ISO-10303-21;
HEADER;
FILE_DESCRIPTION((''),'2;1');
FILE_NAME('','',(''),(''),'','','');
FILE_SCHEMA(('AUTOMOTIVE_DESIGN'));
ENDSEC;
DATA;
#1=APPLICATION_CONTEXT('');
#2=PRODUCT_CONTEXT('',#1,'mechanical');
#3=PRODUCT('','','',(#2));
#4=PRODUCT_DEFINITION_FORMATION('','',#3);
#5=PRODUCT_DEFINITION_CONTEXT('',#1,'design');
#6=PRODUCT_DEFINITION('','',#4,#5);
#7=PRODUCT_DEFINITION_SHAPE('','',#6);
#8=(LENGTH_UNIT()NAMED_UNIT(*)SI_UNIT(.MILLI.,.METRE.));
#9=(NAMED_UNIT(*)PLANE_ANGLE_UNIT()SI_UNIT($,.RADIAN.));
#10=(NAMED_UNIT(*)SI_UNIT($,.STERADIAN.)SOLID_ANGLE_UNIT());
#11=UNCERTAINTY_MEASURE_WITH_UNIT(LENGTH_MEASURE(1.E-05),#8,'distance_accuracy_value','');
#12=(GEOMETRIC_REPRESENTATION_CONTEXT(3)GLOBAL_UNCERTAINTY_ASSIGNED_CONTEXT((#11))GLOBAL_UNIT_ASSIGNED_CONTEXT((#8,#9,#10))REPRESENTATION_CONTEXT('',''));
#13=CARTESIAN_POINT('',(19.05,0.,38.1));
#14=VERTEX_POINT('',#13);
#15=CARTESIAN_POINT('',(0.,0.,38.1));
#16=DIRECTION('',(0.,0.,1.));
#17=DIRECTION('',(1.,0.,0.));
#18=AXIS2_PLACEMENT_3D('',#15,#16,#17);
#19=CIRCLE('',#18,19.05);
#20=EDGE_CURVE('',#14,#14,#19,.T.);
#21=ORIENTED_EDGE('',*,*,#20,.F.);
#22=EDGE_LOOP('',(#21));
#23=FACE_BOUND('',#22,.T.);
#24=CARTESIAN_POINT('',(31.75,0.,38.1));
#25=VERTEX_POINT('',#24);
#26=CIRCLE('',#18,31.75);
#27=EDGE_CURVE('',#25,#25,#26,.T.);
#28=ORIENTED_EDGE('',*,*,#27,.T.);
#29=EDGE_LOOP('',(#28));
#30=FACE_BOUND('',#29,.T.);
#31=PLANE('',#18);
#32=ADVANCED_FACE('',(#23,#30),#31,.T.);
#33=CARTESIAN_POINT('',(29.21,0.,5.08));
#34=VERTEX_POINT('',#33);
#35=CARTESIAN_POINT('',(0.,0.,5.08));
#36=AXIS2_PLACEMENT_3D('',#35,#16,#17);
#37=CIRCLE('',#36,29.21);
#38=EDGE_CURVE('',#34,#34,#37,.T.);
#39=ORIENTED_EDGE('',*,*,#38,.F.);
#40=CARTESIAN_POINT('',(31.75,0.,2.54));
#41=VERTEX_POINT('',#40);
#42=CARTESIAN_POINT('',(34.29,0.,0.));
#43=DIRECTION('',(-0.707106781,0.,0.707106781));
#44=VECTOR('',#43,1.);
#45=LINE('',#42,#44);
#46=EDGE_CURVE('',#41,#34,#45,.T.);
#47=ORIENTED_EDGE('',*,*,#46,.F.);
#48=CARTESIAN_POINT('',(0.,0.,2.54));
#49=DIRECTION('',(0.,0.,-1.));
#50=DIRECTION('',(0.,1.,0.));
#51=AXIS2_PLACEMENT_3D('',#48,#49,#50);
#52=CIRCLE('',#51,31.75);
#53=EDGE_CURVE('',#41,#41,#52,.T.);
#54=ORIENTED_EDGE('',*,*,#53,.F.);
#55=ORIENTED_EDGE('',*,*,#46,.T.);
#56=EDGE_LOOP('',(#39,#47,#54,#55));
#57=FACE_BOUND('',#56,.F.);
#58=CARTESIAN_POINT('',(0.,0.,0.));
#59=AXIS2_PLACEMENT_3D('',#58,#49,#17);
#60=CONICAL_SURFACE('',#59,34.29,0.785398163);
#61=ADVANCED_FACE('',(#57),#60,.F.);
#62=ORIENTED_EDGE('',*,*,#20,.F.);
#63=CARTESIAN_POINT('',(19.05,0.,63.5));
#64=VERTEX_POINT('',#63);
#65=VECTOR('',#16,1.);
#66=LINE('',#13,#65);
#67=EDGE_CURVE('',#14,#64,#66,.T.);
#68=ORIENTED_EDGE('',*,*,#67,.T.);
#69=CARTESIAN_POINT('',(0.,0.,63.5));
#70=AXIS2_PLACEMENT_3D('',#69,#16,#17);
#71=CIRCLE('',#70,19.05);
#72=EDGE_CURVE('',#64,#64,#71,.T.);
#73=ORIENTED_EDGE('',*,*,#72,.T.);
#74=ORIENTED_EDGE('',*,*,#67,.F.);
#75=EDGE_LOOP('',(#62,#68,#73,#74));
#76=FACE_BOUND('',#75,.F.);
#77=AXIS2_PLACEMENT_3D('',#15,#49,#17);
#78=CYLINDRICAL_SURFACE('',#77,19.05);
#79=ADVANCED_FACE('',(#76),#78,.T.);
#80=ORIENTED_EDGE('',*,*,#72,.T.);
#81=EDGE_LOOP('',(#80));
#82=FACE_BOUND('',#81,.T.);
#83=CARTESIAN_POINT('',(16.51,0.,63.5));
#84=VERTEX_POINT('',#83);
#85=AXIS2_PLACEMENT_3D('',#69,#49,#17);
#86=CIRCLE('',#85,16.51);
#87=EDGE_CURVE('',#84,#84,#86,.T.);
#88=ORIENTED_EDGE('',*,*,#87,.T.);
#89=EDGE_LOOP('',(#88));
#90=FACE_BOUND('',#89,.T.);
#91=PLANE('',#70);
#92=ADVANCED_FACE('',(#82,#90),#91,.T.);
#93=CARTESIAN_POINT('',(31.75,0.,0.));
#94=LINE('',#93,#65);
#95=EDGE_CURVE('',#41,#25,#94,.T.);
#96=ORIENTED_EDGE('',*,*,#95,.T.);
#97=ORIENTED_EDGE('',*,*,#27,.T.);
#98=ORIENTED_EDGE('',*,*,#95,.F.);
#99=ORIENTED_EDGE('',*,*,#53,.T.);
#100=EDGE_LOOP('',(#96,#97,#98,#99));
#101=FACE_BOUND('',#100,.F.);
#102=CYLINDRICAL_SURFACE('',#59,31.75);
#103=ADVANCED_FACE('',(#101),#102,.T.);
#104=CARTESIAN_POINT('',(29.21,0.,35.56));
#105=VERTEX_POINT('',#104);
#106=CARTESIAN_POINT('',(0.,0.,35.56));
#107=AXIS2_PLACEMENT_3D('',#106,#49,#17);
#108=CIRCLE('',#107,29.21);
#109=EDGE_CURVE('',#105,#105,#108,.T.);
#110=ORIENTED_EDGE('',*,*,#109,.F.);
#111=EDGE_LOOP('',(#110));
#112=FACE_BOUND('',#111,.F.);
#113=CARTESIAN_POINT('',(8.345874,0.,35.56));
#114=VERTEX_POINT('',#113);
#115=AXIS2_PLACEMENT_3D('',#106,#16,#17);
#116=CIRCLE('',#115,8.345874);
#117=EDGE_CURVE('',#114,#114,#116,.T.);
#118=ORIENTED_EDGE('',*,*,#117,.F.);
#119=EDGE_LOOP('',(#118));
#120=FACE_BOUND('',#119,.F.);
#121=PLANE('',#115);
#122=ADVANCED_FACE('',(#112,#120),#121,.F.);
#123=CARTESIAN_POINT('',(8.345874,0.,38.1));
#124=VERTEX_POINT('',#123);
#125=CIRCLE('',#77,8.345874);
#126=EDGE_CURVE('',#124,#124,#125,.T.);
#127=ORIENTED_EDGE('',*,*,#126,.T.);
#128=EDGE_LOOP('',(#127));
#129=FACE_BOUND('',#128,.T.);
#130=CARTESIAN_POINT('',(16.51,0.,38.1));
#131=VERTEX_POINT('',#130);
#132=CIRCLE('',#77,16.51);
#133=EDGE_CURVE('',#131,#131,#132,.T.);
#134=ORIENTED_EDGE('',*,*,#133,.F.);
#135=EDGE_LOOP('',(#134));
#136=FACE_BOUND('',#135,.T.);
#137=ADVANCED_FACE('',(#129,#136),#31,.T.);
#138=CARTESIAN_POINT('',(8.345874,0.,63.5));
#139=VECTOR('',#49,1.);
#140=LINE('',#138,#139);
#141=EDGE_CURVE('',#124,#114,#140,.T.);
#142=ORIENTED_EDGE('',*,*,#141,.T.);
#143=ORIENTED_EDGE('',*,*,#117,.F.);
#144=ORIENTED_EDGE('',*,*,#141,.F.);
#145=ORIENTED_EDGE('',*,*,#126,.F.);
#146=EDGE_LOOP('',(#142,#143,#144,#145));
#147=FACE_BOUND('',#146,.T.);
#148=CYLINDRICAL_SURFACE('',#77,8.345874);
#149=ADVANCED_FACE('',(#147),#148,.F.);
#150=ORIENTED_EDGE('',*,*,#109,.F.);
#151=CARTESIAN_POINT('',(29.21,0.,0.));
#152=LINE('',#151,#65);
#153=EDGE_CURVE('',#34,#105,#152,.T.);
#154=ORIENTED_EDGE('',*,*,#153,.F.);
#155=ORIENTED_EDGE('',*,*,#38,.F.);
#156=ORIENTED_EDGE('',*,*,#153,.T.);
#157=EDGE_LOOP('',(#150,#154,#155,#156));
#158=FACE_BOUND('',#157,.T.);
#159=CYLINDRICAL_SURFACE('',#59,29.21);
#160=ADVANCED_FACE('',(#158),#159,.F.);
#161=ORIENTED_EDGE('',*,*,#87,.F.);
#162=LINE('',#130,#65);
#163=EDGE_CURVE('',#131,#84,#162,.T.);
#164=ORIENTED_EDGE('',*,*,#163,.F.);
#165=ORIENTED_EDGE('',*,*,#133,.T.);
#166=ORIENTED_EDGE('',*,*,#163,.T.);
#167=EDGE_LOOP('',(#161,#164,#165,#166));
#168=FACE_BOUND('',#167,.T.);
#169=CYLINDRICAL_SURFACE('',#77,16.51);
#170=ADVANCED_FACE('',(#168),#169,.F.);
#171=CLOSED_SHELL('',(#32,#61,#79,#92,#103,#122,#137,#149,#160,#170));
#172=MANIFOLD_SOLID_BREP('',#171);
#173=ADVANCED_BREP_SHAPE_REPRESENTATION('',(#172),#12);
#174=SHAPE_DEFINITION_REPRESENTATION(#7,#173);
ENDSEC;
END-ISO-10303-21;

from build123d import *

# Parameters (mm, degrees)
F0_R     = 31.75
F0_R_2   = 8.3458742529
F1_DEPTH = 38.1
F2_T     = -2.54
F3_R     = 19.05
F3_R_2   = 8.3458742529
F4_DEPTH = 25.4
F6_T     = -2.54


# Not quite as in the source:
# - a fillet or chamfer that OpenCascade refuses, or shapes differently, is made with other operations: its cross-section is extruded or revolved along the edge and cut away or added
# - the program builds the solid bodies; features that only make, move or delete a surface that nothing else refers to are left out


with BuildPart() as f1:
    # F0 (on Top) → F1 (new body)
    with BuildSketch(Plane.XY):
        Circle(F0_R)
        Circle(F0_R_2, mode=Mode.SUBTRACT)
    extrude(amount=F1_DEPTH)

    # F2
    f2_openings = [f1.faces().sort_by_distance(p)[0] for p in [
        (-30.851974, 0, 0),
        (-8.345874, 0, 19.05),
    ]]
    offset(amount=F2_T, openings=f2_openings)

    # F3 (on face) → F4 (join)
    with BuildSketch(Plane.XY.offset(38.1)):
        Circle(F3_R)
        Circle(F3_R_2, mode=Mode.SUBTRACT)
    extrude(amount=F4_DEPTH)

    # F6
    f6_openings = [f1.faces().sort_by_distance(p)[0] for p in [
        (-18.511185, 0, 63.5),
        (-8.345874, 0, 49.53),
    ]]
    offset(amount=F6_T, openings=f6_openings, kind=Kind.INTERSECTION)

    # F7: chamfer of 5.08 on 1 edges, made by hand

    # F7_s1 → F7_t2 (revolve, cut)
    with BuildSketch(Plane.XZ):
        Polygon((34.29, 0), (29.21, 5.08), (29.21, 0), align=None)
    revolve(axis=Axis((0, 0, 0), (0, 0, 1)), mode=Mode.SUBTRACT)


solid = f1.part
